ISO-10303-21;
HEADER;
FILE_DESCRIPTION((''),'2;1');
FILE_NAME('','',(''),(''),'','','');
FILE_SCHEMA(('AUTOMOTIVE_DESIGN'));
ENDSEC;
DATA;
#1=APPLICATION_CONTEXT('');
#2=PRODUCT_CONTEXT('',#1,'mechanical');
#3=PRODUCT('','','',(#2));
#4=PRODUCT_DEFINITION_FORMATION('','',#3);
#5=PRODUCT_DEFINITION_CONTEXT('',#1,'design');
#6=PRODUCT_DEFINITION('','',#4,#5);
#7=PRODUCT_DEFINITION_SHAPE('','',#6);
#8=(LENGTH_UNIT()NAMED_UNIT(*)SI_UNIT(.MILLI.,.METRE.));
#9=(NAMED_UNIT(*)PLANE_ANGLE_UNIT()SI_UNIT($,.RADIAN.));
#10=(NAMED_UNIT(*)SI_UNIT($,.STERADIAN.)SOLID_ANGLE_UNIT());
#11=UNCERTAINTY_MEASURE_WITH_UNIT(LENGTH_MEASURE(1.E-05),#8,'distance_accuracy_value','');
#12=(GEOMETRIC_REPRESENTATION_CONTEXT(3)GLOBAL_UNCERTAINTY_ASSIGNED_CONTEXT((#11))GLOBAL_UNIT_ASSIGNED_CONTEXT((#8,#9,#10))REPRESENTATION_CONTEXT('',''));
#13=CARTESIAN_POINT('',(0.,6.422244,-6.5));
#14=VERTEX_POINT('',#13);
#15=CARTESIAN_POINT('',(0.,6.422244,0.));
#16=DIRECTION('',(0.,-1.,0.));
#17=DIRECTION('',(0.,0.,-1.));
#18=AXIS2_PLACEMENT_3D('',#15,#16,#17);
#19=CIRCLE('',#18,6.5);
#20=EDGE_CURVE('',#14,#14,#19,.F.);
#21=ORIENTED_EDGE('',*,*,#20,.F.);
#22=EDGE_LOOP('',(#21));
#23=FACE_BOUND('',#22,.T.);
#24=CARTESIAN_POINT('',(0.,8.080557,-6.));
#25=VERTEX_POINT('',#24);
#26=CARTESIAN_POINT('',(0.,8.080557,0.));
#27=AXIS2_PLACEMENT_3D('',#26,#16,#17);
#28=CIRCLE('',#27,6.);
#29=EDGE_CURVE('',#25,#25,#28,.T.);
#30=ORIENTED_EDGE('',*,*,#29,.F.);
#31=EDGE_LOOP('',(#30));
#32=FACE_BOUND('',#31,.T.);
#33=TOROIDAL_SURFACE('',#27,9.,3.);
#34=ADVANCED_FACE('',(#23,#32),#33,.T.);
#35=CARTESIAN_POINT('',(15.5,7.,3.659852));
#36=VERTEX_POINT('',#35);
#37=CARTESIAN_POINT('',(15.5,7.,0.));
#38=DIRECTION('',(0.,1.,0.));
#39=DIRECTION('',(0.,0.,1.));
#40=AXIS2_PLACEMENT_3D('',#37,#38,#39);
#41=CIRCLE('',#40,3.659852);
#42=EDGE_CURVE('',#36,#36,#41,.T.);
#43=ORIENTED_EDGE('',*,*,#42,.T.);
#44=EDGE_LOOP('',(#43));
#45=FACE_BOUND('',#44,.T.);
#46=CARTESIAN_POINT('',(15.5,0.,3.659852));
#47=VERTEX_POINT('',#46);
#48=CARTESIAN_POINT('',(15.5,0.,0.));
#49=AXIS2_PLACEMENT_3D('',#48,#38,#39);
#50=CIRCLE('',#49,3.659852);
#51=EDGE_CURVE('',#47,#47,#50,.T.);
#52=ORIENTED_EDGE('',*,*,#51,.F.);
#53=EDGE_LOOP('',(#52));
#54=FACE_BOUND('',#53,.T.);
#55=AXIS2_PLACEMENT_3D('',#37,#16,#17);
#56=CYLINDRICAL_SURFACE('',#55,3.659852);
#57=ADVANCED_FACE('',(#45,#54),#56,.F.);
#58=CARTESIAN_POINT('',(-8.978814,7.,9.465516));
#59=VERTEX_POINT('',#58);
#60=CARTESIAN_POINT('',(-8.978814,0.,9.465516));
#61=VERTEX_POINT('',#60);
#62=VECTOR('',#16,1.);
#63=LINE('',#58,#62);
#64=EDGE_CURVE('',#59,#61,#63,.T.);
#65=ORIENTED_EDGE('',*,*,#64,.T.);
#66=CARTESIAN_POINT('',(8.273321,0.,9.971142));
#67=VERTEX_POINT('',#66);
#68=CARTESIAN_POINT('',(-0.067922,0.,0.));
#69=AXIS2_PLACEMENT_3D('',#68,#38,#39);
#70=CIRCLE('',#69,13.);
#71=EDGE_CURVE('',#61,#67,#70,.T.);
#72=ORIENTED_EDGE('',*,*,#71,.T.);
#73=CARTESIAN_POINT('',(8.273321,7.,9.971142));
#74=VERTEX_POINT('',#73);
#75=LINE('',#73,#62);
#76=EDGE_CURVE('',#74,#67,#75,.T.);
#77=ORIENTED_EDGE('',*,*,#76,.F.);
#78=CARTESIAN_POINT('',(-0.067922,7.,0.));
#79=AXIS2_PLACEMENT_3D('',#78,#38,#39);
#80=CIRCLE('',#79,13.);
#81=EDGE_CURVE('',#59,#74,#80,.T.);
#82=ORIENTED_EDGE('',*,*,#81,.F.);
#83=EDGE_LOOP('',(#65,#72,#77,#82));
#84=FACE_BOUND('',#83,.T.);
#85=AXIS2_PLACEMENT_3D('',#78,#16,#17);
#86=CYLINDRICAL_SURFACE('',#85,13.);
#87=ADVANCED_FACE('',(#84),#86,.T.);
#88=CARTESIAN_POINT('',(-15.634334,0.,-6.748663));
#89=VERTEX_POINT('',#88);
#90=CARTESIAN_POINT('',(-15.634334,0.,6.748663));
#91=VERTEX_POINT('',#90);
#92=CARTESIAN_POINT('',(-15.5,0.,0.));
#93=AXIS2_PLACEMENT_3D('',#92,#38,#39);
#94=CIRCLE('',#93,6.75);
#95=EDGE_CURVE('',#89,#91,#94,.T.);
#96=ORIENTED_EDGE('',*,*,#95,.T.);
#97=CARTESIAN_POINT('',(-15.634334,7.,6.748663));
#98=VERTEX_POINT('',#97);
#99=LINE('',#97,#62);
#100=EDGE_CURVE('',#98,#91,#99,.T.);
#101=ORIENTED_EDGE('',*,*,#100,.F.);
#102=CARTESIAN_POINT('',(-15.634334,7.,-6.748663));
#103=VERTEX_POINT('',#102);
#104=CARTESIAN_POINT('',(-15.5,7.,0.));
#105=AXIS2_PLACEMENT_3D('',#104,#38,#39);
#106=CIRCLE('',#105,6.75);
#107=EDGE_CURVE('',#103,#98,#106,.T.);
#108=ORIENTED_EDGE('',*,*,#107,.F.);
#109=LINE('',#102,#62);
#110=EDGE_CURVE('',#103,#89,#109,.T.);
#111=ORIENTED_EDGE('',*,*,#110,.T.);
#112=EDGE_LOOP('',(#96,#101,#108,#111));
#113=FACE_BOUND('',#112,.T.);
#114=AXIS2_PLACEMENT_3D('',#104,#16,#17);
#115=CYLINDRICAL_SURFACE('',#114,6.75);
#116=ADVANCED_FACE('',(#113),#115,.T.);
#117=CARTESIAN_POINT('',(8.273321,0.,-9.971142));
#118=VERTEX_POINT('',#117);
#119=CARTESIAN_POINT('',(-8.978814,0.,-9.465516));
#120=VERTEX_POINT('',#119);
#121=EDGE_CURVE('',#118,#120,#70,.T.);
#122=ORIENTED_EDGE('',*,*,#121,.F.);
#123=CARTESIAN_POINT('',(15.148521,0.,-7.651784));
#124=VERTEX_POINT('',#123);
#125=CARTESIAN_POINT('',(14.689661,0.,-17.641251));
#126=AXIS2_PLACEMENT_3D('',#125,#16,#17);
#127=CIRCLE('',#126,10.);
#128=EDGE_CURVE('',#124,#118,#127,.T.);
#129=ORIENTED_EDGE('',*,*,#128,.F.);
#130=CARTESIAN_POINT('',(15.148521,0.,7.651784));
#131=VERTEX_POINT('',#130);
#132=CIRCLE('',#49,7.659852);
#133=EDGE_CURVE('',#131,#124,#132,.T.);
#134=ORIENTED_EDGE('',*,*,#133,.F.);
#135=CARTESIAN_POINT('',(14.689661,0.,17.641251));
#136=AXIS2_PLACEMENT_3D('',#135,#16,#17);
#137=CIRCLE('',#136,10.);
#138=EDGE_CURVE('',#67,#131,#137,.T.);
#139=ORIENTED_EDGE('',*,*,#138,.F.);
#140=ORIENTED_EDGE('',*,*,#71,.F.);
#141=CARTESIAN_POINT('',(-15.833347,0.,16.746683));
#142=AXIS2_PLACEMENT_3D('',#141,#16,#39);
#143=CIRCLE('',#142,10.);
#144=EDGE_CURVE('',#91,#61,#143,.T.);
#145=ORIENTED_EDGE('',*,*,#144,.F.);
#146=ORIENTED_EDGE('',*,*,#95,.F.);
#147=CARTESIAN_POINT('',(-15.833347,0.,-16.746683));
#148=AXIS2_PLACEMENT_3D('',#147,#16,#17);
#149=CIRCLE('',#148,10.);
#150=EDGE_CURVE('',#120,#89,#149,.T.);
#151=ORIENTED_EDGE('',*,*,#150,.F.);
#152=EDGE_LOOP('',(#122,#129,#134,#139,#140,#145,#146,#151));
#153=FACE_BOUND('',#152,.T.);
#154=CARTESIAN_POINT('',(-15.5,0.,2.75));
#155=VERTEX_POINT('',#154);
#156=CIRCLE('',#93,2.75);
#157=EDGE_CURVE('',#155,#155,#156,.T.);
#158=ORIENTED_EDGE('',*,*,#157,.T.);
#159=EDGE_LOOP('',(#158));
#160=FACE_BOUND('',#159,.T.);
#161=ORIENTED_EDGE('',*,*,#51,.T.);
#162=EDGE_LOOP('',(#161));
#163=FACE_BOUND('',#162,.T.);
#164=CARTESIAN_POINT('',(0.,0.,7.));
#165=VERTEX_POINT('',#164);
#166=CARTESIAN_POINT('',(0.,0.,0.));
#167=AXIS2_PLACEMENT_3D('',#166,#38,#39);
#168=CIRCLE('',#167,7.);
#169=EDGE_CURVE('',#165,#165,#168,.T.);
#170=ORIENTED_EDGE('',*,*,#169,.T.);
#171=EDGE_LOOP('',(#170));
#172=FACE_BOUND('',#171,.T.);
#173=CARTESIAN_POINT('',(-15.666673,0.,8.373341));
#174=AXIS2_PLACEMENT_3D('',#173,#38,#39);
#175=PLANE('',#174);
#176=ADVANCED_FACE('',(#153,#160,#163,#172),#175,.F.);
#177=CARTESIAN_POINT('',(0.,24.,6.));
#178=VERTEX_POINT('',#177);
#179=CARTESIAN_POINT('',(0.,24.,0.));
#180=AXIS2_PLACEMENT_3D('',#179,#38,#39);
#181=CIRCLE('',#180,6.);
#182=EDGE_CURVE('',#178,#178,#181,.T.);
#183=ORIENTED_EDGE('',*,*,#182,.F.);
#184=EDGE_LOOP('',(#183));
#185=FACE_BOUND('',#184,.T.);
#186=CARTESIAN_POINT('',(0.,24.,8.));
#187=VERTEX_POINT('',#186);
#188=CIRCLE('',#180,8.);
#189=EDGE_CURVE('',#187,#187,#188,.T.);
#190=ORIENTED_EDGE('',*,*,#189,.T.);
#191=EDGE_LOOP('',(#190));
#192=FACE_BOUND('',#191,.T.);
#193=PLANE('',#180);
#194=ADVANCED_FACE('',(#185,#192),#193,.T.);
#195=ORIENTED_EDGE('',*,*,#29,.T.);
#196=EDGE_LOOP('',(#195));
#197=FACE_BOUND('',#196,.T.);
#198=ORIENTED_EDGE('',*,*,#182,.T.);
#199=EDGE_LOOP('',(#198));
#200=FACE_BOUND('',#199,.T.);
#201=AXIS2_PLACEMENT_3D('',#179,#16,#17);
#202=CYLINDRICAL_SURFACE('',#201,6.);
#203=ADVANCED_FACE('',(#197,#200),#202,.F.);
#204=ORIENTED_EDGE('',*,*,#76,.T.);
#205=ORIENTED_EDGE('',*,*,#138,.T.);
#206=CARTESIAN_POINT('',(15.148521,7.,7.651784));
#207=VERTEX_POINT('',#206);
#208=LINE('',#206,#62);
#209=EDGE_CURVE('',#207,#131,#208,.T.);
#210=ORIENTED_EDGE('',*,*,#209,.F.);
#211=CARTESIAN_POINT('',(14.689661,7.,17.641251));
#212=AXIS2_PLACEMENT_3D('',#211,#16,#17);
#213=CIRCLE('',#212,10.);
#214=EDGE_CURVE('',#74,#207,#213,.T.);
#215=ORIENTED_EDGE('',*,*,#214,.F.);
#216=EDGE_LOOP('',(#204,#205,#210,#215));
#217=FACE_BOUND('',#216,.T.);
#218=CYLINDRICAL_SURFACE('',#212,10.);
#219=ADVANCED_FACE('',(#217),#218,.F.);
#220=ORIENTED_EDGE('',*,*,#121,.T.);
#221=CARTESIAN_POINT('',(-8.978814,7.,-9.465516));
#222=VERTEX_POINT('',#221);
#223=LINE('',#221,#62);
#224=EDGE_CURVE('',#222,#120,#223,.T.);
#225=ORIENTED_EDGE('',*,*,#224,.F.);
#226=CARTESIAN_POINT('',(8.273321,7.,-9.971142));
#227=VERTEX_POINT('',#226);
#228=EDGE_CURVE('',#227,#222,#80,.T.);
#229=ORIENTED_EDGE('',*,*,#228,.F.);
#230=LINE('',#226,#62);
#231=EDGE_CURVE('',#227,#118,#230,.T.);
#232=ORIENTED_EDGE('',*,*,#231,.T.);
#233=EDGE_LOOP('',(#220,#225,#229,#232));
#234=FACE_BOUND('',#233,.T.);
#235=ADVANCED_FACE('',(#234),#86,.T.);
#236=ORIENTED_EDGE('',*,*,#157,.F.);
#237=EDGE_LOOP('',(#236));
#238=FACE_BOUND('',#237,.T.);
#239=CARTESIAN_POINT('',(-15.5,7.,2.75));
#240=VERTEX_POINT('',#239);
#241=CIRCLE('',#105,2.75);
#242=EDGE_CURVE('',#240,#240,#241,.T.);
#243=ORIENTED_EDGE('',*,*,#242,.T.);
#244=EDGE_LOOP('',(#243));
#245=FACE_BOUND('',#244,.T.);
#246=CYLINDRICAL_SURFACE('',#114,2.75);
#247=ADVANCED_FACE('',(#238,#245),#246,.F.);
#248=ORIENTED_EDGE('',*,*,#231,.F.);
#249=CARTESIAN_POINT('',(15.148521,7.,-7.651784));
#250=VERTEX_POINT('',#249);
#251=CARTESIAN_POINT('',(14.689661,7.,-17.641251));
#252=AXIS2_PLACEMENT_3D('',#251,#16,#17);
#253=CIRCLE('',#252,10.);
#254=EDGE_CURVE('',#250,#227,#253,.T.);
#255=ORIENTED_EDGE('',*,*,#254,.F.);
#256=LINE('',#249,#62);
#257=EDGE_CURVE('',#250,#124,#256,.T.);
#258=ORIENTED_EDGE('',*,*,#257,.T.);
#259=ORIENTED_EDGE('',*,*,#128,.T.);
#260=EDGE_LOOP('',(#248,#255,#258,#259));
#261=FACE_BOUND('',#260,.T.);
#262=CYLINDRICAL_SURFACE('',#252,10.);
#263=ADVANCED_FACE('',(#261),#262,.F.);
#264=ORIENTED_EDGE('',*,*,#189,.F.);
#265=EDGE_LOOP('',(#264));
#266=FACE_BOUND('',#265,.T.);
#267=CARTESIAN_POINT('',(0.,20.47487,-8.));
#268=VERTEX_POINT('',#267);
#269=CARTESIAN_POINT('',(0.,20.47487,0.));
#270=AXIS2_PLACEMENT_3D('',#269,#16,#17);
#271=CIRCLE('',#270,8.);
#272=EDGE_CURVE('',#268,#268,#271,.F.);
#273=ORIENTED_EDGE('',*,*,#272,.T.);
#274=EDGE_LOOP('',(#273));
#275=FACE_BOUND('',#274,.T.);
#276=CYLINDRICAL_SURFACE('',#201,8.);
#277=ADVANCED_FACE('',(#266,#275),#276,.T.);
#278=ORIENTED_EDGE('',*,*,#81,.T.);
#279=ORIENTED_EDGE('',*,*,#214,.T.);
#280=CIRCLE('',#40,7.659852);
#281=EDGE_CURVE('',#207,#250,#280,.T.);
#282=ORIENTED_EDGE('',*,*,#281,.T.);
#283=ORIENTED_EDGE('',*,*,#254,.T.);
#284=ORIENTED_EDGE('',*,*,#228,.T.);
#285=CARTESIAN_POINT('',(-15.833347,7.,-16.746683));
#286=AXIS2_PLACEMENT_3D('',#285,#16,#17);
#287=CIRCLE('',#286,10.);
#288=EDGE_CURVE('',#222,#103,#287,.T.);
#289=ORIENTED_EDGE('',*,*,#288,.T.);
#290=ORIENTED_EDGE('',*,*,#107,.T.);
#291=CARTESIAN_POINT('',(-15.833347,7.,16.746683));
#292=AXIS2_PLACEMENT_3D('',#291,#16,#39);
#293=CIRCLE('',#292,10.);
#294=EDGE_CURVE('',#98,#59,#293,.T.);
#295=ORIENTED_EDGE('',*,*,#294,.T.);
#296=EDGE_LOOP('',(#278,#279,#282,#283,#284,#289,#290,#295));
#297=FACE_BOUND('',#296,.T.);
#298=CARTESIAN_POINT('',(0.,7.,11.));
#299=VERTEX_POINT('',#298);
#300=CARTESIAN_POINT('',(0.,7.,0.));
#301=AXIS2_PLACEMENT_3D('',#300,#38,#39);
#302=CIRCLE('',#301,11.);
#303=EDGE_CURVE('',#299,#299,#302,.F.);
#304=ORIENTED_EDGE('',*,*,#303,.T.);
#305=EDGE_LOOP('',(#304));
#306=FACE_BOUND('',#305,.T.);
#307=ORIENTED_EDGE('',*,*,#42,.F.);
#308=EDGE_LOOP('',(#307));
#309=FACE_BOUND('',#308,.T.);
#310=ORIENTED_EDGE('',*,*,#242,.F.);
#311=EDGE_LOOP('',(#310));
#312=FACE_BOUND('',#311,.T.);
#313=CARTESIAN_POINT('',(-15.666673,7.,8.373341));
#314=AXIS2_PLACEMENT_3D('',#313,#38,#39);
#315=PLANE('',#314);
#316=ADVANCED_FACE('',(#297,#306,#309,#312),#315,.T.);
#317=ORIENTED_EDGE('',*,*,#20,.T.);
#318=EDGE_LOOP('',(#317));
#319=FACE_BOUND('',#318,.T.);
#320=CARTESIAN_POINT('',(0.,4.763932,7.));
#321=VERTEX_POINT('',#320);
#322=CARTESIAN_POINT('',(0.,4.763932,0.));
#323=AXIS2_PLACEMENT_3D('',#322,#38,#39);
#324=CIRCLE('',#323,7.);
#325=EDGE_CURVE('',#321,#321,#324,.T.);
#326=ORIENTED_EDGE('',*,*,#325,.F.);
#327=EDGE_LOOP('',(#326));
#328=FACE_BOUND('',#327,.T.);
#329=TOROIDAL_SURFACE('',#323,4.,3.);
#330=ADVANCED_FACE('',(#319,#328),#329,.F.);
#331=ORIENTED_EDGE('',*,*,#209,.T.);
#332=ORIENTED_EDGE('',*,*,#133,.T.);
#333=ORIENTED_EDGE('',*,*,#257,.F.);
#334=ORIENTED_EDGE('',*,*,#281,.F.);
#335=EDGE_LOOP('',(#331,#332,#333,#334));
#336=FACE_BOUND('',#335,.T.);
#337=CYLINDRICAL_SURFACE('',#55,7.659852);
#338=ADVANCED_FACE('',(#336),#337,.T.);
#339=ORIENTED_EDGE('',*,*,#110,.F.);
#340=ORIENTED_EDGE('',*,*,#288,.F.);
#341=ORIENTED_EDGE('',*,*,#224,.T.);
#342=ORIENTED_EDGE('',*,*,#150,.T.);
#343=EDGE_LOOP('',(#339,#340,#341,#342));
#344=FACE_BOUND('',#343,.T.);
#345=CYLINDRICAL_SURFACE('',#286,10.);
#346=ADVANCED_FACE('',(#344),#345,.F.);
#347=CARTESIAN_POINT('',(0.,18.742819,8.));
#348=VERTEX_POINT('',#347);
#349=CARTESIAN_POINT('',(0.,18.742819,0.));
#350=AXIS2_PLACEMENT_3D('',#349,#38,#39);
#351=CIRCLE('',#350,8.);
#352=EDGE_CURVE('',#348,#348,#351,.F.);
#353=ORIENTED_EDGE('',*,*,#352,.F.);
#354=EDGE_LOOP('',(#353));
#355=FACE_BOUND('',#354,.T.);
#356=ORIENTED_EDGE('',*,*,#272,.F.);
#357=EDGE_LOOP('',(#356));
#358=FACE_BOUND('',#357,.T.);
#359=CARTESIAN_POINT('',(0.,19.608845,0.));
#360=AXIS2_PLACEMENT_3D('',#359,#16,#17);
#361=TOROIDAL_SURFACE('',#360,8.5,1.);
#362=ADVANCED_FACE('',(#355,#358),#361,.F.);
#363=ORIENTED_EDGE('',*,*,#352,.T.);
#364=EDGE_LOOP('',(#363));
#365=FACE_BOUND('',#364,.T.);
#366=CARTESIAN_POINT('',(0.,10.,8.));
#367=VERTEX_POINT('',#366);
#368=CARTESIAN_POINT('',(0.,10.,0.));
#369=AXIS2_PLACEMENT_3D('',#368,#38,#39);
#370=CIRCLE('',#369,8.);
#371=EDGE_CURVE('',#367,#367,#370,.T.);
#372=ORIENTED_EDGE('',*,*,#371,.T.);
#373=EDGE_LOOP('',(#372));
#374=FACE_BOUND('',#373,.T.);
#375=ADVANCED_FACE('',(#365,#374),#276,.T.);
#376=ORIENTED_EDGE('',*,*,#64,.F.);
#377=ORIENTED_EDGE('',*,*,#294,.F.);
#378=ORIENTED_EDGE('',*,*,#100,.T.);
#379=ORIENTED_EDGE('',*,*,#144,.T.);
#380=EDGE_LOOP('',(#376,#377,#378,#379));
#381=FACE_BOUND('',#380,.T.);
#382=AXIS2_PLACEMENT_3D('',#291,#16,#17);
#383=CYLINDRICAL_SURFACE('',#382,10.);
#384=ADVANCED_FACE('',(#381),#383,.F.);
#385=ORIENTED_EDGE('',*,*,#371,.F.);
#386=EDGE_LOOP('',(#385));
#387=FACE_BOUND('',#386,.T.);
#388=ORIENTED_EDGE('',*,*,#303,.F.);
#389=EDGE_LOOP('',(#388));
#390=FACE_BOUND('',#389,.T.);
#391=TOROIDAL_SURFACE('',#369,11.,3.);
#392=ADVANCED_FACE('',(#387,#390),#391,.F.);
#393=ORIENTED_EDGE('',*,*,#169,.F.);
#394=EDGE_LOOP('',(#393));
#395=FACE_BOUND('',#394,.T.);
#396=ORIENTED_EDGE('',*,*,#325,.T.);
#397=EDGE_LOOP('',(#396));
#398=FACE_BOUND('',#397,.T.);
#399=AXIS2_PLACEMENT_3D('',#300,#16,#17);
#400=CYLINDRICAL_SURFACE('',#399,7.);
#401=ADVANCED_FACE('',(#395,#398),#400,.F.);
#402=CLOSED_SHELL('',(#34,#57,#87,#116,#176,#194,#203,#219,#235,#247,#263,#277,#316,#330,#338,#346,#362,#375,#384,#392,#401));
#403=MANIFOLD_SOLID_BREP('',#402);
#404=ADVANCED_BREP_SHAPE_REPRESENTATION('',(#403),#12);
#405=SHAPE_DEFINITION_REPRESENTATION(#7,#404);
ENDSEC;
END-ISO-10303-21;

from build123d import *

# Parameters (mm, degrees)
SKETCH1_R           = 7
SKETCH1_R_2         = 2.75
SKETCH1_R_3         = 3.659852489
BOSS_EXTRUDE1_DEPTH = 7
SKETCH2_R           = 8
SKETCH2_R_2         = 6
BOSS_EXTRUDE2_DEPTH = 17
FILLET1_R           = 3
FILLET2_R           = 3
SKETCH3_R           = 1


with BuildPart() as part:
    # Sketch1 → Boss-Extrude1 (new body)
    with BuildSketch(Plane(origin=(0, 0, 0), x_dir=(1, 0, 0), z_dir=(0, 1, 0))):
        with BuildLine():
            ThreePointArc((-15.634333704, 6.748663161), (-22.25, 0), (-15.634333704, -6.748663161))
            ThreePointArc((-15.634333704, -6.748663161), (-12.054001616, -7.488359295), (-8.978814065, -9.465516285))
            ThreePointArc((-8.978814065, -9.465516285), (-0.448762307, -12.99442036), (8.273320847, -9.971141939))
            ThreePointArc((8.273320847, -9.971141939), (11.493139678, -8.165901558), (15.148520579, -7.651784261))
            ThreePointArc((15.148520579, -7.651784261), (23.159852489, 0), (15.148520579, 7.651784261))
            ThreePointArc((15.148520579, 7.651784261), (11.493139678, 8.165901558), (8.273320847, 9.971141939))
            ThreePointArc((8.273320847, 9.971141939), (-0.448762307, 12.99442036), (-8.978814065, 9.465516285))
            ThreePointArc((-8.978814065, 9.465516285), (-12.054001616, 7.488359295), (-15.634333704, 6.748663161))
        make_face()
        with Locations(Location((0, 0, 0), (0, 0, 270))):
            Circle(SKETCH1_R, mode=Mode.SUBTRACT)
        with Locations(Location((-15.5, 0, 0), (0, 0, 270))):
            Circle(SKETCH1_R_2, mode=Mode.SUBTRACT)
        with Locations(Location((15.5, 0, 0), (0, 0, 270))):
            Circle(SKETCH1_R_3, mode=Mode.SUBTRACT)
    extrude(amount=BOSS_EXTRUDE1_DEPTH)

    # Sketch2 → Boss-Extrude2 (add)
    with BuildSketch(Plane(origin=(0, 7, 0), x_dir=(1, 0, 0), z_dir=(0, 1, 0))):
        with Locations(Location((0, 0, 0), (0, 0, 270))):
            Circle(SKETCH2_R)
        with Locations(Location((0, 0, 0), (0, 0, 270))):
            Circle(SKETCH2_R_2, mode=Mode.SUBTRACT)
    extrude(amount=BOSS_EXTRUDE2_DEPTH)

    # Fillet1
    # the kernel refuses this fillet: 3 mm, written as the material it adds along each edge
    with BuildSketch(Plane(origin=(0, 7, 0), x_dir=(0, 0, 1), z_dir=(-1, 0, 0))) as fillet1_piece_1:
        with BuildLine():
            CenterArc((4, -2.236067977), FILLET1_R, 0, 48.189685104)
            Line((6, 0), (6.04, 0.04472136))
            ThreePointArc((6.04, 0.04472136), (6.5, 0.06), (7, 0.06))
            Line((7, 0.06), (7.06, 0))
            Line((7.06, 0), (7.06, -2.236067977))
            Line((7.06, -2.236067977), (7, -2.236067977))
        make_face()
    revolve(axis=Axis((0, 7, 0), (0, 1, 0)))
    with BuildSketch(Plane(origin=(0, 7, 0), x_dir=(0, 0, 1), z_dir=(-1, 0, 0))) as fillet1_piece_2:
        with BuildLine():
            CenterArc((8 + FILLET1_R, FILLET1_R), FILLET1_R, 180, 90)
            Line((8, FILLET1_R), (8 - FILLET1_R * 0.02, FILLET1_R))
            Line((8 - FILLET1_R * 0.02, FILLET1_R), (8 - FILLET1_R * 0.02, -FILLET1_R * 0.02))
            Line((8 - FILLET1_R * 0.02, -FILLET1_R * 0.02), (8 + FILLET1_R, -FILLET1_R * 0.02))
            Line((8 + FILLET1_R, -FILLET1_R * 0.02), (8 + FILLET1_R, 0))
        make_face()
    revolve(axis=Axis((0, 7, 0), (0, 1, 0)))

    # Fillet2
    fillet2_edges = [part.edges().sort_by_distance(p)[0] for p in [
        (0, 7, -6),
    ]]
    fillet(fillet2_edges, radius=FILLET2_R)


with BuildPart() as body_2:
    # Sketch3 → Revolve1 (revolve)
    with BuildSketch(Plane(origin=(0, 0, 0), x_dir=(0, 0, -1), z_dir=(1, 0, 0))):
        with Locations((8.5, 19.608844607)):
            Circle(SKETCH3_R)
    revolve(axis=Axis((0, 0, 0), (0, 1, 0)))


with BuildPart() as part_1:
    add(part.part)

    # Intersect1: read off the stored shape, not the designer's step
    # Intersect1: cut body 2
    add(body_2.part, mode=Mode.SUBTRACT)


solid = part_1.part
